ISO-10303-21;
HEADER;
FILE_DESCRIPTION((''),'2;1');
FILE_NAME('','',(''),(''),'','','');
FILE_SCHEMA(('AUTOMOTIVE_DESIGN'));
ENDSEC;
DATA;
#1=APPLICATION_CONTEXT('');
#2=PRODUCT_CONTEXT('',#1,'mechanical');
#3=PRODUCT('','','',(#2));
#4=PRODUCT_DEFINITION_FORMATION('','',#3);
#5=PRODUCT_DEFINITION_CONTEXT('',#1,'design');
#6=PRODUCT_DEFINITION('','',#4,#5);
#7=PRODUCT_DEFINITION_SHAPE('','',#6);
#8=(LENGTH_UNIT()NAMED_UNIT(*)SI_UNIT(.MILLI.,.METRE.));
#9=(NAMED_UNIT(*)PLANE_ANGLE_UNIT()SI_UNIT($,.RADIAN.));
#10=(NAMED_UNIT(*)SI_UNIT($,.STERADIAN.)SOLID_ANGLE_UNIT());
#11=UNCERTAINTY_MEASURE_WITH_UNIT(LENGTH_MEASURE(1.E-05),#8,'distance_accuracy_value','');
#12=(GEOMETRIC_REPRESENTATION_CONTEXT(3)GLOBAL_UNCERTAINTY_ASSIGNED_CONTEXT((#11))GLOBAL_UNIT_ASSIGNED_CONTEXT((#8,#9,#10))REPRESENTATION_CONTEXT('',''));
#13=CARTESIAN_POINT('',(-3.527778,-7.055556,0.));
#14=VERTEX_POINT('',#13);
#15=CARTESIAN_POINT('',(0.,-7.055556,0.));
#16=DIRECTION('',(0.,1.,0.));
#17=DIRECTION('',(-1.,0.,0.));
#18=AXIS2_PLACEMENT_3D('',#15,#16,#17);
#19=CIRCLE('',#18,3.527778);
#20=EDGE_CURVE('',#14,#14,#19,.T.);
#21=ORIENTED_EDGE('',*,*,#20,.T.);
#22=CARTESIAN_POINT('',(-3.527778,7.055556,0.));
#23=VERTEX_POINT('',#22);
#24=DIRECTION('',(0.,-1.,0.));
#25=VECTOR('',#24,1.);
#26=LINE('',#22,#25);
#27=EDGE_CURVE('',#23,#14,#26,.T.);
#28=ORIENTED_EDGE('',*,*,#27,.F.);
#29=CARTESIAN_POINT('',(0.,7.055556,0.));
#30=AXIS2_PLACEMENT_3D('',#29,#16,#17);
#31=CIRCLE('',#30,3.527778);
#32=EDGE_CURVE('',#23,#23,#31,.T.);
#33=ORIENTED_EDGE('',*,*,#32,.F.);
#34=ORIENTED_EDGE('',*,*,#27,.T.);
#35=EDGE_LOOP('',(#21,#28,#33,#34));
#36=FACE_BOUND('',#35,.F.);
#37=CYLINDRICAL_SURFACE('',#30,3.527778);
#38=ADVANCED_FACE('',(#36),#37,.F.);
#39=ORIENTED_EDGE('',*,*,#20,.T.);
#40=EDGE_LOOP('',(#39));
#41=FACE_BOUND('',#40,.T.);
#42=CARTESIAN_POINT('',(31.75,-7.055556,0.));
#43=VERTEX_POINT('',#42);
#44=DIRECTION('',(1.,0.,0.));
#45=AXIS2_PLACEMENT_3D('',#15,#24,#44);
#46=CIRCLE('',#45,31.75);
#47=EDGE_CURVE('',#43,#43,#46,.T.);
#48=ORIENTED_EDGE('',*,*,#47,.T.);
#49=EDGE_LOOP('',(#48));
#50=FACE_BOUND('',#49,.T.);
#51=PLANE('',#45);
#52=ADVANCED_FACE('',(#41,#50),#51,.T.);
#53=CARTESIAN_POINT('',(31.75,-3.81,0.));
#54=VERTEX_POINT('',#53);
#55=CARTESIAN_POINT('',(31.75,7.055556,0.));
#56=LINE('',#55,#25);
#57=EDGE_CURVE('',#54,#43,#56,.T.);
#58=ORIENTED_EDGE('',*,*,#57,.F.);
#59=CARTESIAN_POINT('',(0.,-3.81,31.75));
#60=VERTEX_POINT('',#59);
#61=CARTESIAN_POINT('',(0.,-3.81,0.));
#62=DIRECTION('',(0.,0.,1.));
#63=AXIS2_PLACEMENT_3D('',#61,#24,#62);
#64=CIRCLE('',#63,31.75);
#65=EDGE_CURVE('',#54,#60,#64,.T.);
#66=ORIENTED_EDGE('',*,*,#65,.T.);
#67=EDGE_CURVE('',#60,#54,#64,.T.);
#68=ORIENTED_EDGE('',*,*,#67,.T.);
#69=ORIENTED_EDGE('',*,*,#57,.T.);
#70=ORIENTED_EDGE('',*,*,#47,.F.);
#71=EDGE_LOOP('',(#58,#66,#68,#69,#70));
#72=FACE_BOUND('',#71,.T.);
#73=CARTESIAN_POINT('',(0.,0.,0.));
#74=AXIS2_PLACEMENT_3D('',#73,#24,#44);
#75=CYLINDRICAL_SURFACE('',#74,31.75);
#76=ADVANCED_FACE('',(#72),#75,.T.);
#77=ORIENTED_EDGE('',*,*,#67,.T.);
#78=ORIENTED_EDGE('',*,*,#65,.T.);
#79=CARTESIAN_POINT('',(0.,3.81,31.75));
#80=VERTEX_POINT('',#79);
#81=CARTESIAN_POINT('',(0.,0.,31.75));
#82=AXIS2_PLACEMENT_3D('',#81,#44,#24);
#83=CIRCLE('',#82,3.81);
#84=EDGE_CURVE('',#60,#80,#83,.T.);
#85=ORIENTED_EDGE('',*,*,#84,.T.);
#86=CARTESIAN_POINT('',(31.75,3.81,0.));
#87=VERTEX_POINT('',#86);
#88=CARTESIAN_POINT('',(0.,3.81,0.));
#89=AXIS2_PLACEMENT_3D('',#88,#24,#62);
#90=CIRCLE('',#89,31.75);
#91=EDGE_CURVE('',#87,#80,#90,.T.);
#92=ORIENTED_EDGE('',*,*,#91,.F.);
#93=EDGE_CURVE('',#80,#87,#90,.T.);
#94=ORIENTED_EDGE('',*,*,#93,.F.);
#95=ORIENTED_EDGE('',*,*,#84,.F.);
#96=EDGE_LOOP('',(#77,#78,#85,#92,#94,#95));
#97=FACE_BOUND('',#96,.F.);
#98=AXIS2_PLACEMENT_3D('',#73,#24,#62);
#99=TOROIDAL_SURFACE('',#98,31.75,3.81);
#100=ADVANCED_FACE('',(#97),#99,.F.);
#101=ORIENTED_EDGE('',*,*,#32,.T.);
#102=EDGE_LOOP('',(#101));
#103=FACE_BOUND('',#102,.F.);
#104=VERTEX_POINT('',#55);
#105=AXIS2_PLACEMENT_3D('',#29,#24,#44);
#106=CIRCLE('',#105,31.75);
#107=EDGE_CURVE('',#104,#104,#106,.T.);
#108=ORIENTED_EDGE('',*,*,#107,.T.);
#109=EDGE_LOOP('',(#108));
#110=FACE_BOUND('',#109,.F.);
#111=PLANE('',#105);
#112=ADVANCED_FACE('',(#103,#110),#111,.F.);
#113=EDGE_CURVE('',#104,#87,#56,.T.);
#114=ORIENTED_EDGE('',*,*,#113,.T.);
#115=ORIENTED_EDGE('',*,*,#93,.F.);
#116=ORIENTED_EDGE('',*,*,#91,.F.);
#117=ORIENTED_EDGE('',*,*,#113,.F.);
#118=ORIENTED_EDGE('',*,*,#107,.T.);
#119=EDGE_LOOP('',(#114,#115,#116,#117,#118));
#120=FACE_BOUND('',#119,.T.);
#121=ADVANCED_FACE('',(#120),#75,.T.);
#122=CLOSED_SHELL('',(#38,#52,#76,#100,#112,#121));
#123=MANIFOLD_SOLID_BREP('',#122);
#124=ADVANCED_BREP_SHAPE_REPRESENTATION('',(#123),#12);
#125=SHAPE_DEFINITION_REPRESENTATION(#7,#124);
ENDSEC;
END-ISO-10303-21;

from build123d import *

# Parameters (mm, degrees)
F1_R     = 31.75
F2_DEPTH = 7.0555555556
F5_R     = 3.5277777778
F6_DEPTH = 14.1111111111


# Not quite as in the source:
# - a variable given as a bare number and used for a length is read in inches; the dataset says mm whatever the document's units were


with BuildPart() as f2:
    # F1 (on Front) → F2 (new body, symmetric)
    with BuildSketch(Plane.XZ):
        Circle(F1_R)
    extrude(amount=F2_DEPTH, both=True)

    # F3 (on Right) → F4 (revolve, cut)
    with BuildSketch(Plane.YZ):
        with BuildLine():
            Line((3.81, 31.75), (-3.81, 31.75))
            ThreePointArc((-3.81, 31.75), (0, 27.94), (3.81, 31.75))
        make_face()
    revolve(axis=Axis((0, -7.0555555556, 0), (0, -1, 0)), mode=Mode.SUBTRACT)

    # F5 (on face) → F6 (cut, through all)
    with BuildSketch(Plane(origin=(0, 7.0555555556, 0), x_dir=(-1, 0, 0), z_dir=(0, 1, 0))):
        Circle(F5_R)
    extrude(amount=-F6_DEPTH, mode=Mode.SUBTRACT)


solid = f2.part
